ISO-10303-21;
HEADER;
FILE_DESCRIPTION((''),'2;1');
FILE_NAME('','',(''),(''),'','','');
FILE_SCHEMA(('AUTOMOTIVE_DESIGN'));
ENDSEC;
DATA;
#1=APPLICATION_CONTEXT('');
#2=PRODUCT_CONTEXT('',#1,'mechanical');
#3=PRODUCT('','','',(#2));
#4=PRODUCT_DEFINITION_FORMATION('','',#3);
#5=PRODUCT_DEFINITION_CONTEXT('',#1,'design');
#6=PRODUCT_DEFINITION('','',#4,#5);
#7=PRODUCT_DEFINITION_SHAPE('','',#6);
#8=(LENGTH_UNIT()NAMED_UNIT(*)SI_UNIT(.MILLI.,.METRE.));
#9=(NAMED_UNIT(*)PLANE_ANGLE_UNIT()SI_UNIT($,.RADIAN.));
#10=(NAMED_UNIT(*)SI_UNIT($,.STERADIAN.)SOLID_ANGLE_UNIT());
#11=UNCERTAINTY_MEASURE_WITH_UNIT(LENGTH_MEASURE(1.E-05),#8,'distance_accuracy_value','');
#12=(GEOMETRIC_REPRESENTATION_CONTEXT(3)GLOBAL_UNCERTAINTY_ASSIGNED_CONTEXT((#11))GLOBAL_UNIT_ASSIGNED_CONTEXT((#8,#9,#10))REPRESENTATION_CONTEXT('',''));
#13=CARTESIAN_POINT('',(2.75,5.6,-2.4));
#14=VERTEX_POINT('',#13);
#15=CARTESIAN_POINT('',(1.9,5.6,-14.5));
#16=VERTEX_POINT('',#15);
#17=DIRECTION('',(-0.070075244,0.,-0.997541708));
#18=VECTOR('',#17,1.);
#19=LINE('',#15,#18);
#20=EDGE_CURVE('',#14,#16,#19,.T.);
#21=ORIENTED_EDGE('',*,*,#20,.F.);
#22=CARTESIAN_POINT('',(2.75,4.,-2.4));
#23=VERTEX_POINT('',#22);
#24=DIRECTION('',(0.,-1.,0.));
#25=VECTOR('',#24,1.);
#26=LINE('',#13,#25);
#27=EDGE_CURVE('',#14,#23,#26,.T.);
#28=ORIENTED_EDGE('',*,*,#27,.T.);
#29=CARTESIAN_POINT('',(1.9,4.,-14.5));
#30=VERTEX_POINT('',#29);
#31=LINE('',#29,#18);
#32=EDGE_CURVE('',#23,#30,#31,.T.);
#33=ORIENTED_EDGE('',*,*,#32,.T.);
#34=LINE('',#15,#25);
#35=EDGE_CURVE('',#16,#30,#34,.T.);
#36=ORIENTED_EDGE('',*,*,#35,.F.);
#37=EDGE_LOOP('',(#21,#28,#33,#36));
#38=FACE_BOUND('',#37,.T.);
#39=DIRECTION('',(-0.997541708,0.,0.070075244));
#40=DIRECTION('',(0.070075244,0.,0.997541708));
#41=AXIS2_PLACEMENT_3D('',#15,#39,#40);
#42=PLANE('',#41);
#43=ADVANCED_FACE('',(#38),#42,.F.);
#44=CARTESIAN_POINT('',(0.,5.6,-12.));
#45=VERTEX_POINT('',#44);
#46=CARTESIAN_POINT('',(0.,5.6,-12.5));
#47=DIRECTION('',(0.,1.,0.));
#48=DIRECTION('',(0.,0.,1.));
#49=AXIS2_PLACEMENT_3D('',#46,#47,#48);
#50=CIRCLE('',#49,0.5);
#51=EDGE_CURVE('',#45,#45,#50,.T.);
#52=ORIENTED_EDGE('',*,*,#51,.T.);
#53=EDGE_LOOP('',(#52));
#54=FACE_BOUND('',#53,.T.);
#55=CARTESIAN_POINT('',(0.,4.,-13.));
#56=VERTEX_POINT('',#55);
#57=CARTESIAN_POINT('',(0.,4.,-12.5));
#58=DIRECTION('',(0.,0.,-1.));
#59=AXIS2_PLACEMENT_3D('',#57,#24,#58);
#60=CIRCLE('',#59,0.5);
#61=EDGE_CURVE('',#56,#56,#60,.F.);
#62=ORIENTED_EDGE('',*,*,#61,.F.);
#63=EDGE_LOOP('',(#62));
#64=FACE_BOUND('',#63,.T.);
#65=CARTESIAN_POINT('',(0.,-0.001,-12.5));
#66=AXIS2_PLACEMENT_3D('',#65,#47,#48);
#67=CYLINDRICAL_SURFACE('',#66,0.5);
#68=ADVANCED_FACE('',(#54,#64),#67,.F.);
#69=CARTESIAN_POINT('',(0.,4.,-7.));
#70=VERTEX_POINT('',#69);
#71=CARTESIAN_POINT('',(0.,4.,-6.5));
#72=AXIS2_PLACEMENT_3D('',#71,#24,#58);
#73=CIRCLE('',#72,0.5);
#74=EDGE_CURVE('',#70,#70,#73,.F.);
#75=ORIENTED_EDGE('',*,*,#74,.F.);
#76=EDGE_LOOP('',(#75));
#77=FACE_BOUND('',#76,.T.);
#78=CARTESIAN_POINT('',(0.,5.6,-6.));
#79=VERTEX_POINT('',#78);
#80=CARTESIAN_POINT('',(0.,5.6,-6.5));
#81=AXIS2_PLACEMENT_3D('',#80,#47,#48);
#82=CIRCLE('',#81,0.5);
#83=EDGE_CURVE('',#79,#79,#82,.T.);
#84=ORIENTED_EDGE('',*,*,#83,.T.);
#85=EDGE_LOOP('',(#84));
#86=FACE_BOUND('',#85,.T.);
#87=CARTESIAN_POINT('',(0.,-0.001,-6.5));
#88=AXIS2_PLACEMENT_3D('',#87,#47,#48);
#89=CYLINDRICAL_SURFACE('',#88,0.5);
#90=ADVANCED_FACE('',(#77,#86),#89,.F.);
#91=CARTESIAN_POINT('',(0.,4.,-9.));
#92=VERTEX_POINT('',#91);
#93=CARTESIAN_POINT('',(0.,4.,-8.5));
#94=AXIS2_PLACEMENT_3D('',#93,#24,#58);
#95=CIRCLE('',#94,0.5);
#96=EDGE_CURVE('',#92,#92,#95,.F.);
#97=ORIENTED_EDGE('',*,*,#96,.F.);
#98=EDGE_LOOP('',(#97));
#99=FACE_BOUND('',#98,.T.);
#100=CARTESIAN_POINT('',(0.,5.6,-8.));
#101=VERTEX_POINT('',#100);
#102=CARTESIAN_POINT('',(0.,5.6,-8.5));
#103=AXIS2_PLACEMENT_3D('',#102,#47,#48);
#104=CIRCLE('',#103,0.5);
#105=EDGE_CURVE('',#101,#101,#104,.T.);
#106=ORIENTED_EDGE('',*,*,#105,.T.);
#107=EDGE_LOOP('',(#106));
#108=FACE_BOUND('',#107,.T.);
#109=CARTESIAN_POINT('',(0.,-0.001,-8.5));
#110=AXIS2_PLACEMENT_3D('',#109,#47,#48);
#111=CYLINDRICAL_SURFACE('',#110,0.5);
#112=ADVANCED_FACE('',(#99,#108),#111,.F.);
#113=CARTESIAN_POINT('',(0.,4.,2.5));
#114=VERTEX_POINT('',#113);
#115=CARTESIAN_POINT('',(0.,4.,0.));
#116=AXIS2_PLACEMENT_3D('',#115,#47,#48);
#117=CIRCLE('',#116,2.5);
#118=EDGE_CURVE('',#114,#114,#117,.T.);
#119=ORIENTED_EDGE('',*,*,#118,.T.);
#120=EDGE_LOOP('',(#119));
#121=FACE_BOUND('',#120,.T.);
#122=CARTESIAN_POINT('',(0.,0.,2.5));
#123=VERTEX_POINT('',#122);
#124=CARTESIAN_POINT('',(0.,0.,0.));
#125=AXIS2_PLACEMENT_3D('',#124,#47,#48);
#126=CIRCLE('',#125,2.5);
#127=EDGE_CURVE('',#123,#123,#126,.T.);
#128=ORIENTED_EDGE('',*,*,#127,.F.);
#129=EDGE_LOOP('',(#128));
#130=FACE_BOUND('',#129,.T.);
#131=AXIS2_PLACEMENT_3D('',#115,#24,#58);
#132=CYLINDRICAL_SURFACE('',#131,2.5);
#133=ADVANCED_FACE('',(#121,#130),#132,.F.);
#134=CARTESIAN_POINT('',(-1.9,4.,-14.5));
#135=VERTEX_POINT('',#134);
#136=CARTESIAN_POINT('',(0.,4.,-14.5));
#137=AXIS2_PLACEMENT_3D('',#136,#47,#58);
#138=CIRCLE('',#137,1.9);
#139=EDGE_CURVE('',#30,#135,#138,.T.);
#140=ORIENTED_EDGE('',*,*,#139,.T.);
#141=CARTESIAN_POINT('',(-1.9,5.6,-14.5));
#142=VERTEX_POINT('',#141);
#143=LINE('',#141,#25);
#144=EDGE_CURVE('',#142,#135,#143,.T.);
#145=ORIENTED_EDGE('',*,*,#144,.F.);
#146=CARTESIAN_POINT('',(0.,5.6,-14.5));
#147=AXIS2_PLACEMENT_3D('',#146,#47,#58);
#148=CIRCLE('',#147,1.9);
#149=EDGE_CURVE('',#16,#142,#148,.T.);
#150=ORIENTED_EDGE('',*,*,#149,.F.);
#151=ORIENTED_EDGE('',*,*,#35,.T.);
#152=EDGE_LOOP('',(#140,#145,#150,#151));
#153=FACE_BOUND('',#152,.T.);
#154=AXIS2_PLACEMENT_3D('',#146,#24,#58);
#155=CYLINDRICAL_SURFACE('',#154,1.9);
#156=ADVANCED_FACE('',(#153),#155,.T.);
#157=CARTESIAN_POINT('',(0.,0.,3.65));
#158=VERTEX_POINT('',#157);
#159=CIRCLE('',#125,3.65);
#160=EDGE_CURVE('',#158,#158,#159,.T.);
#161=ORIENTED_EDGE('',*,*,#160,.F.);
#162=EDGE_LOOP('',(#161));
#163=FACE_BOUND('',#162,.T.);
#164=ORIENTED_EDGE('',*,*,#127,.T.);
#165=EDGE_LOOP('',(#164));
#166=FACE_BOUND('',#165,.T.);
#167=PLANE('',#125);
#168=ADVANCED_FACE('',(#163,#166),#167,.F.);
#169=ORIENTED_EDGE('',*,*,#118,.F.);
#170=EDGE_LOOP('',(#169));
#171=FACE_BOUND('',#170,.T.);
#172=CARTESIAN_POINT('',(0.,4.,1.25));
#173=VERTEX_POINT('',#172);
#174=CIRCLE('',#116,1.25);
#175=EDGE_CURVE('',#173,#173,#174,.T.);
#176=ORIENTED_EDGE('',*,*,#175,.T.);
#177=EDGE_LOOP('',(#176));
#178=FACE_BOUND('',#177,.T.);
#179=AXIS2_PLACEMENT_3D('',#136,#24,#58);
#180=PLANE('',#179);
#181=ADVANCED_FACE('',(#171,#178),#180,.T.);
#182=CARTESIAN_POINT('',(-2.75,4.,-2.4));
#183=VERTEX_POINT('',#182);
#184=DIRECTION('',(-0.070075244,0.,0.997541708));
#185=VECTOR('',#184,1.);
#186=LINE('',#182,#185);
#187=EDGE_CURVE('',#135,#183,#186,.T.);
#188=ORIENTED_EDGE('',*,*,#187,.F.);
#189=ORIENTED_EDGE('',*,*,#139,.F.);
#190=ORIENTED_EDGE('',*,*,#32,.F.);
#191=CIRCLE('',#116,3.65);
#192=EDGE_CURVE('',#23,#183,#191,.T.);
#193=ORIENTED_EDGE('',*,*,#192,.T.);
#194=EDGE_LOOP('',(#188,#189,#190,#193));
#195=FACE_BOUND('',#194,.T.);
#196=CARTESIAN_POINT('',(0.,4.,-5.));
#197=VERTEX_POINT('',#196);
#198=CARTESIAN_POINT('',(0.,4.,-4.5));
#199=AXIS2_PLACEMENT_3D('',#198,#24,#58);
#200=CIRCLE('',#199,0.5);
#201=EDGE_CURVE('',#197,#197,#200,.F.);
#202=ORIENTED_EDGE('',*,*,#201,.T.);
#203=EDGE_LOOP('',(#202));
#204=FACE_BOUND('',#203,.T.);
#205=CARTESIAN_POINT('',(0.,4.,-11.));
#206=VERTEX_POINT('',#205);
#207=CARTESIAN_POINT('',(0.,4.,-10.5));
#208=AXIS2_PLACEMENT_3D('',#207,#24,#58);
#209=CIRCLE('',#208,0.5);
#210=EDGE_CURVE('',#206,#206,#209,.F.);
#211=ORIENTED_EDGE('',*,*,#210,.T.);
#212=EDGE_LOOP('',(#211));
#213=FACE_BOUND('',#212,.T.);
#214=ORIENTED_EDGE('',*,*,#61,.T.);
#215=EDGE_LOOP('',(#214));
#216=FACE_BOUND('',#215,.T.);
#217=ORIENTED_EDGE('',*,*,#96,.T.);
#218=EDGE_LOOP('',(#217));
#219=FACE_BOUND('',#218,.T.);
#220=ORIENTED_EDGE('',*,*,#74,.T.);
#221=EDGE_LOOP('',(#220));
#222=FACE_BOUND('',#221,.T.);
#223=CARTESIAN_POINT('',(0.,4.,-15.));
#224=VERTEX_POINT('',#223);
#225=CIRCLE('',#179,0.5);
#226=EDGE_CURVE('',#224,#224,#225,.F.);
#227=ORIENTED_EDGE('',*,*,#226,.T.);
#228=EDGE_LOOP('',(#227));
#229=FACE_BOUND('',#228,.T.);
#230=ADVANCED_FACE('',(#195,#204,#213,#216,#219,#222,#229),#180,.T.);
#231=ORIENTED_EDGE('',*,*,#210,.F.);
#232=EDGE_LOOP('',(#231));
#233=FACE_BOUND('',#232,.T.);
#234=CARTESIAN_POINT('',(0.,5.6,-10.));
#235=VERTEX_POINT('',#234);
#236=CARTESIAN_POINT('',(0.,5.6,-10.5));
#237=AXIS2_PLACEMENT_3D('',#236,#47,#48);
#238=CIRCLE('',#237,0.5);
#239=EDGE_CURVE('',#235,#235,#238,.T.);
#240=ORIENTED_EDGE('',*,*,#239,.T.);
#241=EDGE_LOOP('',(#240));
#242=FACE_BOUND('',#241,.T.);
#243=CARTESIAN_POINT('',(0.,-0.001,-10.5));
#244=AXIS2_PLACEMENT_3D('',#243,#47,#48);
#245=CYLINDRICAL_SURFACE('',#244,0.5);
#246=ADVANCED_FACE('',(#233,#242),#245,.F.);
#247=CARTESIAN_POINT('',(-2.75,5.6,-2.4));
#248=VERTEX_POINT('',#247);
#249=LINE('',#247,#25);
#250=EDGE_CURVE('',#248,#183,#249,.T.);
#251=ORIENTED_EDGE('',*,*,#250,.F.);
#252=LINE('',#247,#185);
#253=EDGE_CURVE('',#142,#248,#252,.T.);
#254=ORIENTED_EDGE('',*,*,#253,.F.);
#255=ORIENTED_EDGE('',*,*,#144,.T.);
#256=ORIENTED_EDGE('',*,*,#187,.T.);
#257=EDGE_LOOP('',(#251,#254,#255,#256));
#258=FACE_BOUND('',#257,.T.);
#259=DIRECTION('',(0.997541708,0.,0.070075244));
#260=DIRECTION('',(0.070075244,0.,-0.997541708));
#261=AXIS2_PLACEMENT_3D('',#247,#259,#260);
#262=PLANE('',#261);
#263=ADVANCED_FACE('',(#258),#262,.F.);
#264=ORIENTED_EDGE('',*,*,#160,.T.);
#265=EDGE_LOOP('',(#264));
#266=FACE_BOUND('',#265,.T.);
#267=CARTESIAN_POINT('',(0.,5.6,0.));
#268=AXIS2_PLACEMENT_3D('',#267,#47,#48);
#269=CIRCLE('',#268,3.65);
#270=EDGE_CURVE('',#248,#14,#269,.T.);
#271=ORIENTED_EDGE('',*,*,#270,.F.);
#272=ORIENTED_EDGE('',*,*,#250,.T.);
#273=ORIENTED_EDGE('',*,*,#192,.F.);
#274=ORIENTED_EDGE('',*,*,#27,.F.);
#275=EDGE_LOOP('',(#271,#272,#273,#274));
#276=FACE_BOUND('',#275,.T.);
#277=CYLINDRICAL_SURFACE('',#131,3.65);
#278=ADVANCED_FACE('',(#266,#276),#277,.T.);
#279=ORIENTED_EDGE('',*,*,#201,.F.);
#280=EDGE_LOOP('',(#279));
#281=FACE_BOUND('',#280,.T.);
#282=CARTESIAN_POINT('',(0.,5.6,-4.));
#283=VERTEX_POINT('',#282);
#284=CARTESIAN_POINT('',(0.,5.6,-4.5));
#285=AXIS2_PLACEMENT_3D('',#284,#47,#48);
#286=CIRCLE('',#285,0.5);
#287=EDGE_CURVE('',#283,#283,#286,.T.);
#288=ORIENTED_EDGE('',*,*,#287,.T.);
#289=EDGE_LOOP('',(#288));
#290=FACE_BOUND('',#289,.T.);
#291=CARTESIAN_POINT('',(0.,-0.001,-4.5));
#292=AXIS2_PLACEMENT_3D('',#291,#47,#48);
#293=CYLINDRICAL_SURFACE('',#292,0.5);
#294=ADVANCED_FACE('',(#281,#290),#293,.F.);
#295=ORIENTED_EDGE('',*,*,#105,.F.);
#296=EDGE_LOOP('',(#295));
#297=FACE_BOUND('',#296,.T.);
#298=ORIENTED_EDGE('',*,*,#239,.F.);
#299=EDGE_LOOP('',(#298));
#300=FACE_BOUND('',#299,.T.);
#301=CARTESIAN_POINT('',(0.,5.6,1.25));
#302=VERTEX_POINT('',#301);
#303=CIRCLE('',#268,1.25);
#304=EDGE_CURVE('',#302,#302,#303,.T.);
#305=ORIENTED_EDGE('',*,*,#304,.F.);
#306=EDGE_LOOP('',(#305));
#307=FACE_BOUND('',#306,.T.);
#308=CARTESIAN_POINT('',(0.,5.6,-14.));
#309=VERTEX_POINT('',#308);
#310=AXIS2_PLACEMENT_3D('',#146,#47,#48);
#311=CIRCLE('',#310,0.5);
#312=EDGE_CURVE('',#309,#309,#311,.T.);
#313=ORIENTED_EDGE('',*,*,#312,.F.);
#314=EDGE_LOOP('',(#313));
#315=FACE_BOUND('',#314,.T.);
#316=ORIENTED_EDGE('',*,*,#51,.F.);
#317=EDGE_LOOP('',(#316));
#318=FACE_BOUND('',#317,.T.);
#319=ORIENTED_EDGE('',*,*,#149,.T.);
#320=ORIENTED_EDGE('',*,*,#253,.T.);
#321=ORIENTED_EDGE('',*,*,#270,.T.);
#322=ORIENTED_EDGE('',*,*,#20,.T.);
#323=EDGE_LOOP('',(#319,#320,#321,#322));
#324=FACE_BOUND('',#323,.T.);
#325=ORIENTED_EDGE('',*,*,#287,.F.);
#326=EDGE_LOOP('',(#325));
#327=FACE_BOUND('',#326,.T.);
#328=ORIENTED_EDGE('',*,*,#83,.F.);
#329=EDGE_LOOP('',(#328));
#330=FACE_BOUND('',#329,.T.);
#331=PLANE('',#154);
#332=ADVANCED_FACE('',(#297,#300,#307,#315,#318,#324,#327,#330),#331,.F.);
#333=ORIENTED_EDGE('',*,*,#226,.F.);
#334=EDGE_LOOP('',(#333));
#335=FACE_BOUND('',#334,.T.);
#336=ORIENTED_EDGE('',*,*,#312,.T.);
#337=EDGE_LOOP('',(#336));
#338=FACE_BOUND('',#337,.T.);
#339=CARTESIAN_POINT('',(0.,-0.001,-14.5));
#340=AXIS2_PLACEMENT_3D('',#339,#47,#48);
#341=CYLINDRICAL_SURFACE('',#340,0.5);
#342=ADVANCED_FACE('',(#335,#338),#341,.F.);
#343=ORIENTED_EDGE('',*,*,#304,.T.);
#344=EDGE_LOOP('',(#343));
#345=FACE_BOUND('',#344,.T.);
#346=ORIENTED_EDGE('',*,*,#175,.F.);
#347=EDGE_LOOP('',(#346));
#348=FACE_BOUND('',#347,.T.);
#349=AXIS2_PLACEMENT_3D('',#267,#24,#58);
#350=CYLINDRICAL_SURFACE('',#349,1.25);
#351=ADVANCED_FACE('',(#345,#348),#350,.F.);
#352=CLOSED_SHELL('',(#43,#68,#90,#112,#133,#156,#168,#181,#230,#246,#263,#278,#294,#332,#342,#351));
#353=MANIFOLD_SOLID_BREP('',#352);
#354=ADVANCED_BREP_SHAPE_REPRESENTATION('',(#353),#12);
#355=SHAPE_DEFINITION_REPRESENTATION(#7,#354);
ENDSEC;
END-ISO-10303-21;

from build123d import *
from build123d.topology import SkipClean

# Parameters (mm, degrees)
SKETCH1_R           = 3.65
SKETCH1_R_2         = 2.5
BOSS_EXTRUDE1_DEPTH = 4
SKETCH2_R           = 1.25
BOSS_EXTRUDE2_DEPTH = 1.6
CUT_EXTRUDE1_REACH  = 19.71
SKETCH3_R           = 0.5


with BuildPart() as part:
    # Sketch1 → Boss-Extrude1 (new body)
    with BuildSketch(Plane(origin=(0, 0, 0), x_dir=(1, 0, 0), z_dir=(0, 1, 0))):
        Circle(SKETCH1_R)
        Circle(SKETCH1_R_2, mode=Mode.SUBTRACT)
    extrude(amount=BOSS_EXTRUDE1_DEPTH)

    # Sketch2 → Boss-Extrude2 (add)
    with SkipClean():  # the faces are left unmerged after this step: merging them gives an invalid solid
        with BuildSketch(Plane(origin=(0, 4, 0), x_dir=(1, 0, 0), z_dir=(0, 1, 0))):
            with BuildLine():
                Line((-2.75, 2.4), (-1.9, 14.5))
                ThreePointArc((-1.9, 14.5), (0, 16.4), (1.9, 14.5))
                Line((1.9, 14.5), (2.75, 2.4))
                ThreePointArc((2.75, 2.4), (0, -3.65), (-2.75, 2.4))
            make_face()
            Circle(SKETCH2_R, mode=Mode.SUBTRACT)
        extrude(amount=BOSS_EXTRUDE2_DEPTH)
    add(part.part.scale(1), mode=Mode.REPLACE)  # the faces are merged on a copy

    # Sketch3 → Cut-Extrude1 (cut, up to next)
    with BuildSketch(Plane(origin=(0, 5.6, 0), x_dir=(1, 0, 0), z_dir=(0, 1, 0)), mode=Mode.PRIVATE) as cut_extrude1_sk1:
        with Locations((0, 12.5)):
            Circle(SKETCH3_R)
    cut_extrude1_tool1 = extrude(cut_extrude1_sk1.sketch, amount=-CUT_EXTRUDE1_REACH, mode=Mode.PRIVATE) & part.part
    # Sketch3 → Cut-Extrude1 (cut, up to next)
    with BuildSketch(Plane(origin=(0, 5.6, 0), x_dir=(1, 0, 0), z_dir=(0, 1, 0)), mode=Mode.PRIVATE) as cut_extrude1_sk2:
        with Locations((0, 10.5)):
            Circle(SKETCH3_R)
    cut_extrude1_tool2 = extrude(cut_extrude1_sk2.sketch, amount=-CUT_EXTRUDE1_REACH, mode=Mode.PRIVATE) & part.part
    # Sketch3 → Cut-Extrude1 (cut, up to next)
    with BuildSketch(Plane(origin=(0, 5.6, 0), x_dir=(1, 0, 0), z_dir=(0, 1, 0)), mode=Mode.PRIVATE) as cut_extrude1_sk3:
        with Locations((0, 14.5)):
            Circle(SKETCH3_R)
    cut_extrude1_tool3 = extrude(cut_extrude1_sk3.sketch, amount=-CUT_EXTRUDE1_REACH, mode=Mode.PRIVATE) & part.part
    # Sketch3 → Cut-Extrude1 (cut, up to next)
    with BuildSketch(Plane(origin=(0, 5.6, 0), x_dir=(1, 0, 0), z_dir=(0, 1, 0)), mode=Mode.PRIVATE) as cut_extrude1_sk4:
        with Locations((0, 8.5)):
            Circle(SKETCH3_R)
    cut_extrude1_tool4 = extrude(cut_extrude1_sk4.sketch, amount=-CUT_EXTRUDE1_REACH, mode=Mode.PRIVATE) & part.part
    # Sketch3 → Cut-Extrude1 (cut, up to next)
    with BuildSketch(Plane(origin=(0, 5.6, 0), x_dir=(1, 0, 0), z_dir=(0, 1, 0)), mode=Mode.PRIVATE) as cut_extrude1_sk5:
        with Locations((0, 6.5)):
            Circle(SKETCH3_R)
    cut_extrude1_tool5 = extrude(cut_extrude1_sk5.sketch, amount=-CUT_EXTRUDE1_REACH, mode=Mode.PRIVATE) & part.part
    # Sketch3 → Cut-Extrude1 (cut, up to next)
    with BuildSketch(Plane(origin=(0, 5.6, 0), x_dir=(1, 0, 0), z_dir=(0, 1, 0)), mode=Mode.PRIVATE) as cut_extrude1_sk6:
        with Locations((0, 4.5)):
            Circle(SKETCH3_R)
    cut_extrude1_tool6 = extrude(cut_extrude1_sk6.sketch, amount=-CUT_EXTRUDE1_REACH, mode=Mode.PRIVATE) & part.part
    add(cut_extrude1_tool1.solids().sort_by_distance((0, 5.6, -12.5))[0], mode=Mode.SUBTRACT)
    add(cut_extrude1_tool2.solids().sort_by_distance((0, 5.6, -10.5))[0], mode=Mode.SUBTRACT)
    add(cut_extrude1_tool3.solids().sort_by_distance((0, 5.6, -14.5))[0], mode=Mode.SUBTRACT)
    add(cut_extrude1_tool4.solids().sort_by_distance((0, 5.6, -8.5))[0], mode=Mode.SUBTRACT)
    add(cut_extrude1_tool5.solids().sort_by_distance((0, 5.6, -6.5))[0], mode=Mode.SUBTRACT)
    add(cut_extrude1_tool6.solids().sort_by_distance((0, 5.6, -4.5))[0], mode=Mode.SUBTRACT)


solid = part.part
